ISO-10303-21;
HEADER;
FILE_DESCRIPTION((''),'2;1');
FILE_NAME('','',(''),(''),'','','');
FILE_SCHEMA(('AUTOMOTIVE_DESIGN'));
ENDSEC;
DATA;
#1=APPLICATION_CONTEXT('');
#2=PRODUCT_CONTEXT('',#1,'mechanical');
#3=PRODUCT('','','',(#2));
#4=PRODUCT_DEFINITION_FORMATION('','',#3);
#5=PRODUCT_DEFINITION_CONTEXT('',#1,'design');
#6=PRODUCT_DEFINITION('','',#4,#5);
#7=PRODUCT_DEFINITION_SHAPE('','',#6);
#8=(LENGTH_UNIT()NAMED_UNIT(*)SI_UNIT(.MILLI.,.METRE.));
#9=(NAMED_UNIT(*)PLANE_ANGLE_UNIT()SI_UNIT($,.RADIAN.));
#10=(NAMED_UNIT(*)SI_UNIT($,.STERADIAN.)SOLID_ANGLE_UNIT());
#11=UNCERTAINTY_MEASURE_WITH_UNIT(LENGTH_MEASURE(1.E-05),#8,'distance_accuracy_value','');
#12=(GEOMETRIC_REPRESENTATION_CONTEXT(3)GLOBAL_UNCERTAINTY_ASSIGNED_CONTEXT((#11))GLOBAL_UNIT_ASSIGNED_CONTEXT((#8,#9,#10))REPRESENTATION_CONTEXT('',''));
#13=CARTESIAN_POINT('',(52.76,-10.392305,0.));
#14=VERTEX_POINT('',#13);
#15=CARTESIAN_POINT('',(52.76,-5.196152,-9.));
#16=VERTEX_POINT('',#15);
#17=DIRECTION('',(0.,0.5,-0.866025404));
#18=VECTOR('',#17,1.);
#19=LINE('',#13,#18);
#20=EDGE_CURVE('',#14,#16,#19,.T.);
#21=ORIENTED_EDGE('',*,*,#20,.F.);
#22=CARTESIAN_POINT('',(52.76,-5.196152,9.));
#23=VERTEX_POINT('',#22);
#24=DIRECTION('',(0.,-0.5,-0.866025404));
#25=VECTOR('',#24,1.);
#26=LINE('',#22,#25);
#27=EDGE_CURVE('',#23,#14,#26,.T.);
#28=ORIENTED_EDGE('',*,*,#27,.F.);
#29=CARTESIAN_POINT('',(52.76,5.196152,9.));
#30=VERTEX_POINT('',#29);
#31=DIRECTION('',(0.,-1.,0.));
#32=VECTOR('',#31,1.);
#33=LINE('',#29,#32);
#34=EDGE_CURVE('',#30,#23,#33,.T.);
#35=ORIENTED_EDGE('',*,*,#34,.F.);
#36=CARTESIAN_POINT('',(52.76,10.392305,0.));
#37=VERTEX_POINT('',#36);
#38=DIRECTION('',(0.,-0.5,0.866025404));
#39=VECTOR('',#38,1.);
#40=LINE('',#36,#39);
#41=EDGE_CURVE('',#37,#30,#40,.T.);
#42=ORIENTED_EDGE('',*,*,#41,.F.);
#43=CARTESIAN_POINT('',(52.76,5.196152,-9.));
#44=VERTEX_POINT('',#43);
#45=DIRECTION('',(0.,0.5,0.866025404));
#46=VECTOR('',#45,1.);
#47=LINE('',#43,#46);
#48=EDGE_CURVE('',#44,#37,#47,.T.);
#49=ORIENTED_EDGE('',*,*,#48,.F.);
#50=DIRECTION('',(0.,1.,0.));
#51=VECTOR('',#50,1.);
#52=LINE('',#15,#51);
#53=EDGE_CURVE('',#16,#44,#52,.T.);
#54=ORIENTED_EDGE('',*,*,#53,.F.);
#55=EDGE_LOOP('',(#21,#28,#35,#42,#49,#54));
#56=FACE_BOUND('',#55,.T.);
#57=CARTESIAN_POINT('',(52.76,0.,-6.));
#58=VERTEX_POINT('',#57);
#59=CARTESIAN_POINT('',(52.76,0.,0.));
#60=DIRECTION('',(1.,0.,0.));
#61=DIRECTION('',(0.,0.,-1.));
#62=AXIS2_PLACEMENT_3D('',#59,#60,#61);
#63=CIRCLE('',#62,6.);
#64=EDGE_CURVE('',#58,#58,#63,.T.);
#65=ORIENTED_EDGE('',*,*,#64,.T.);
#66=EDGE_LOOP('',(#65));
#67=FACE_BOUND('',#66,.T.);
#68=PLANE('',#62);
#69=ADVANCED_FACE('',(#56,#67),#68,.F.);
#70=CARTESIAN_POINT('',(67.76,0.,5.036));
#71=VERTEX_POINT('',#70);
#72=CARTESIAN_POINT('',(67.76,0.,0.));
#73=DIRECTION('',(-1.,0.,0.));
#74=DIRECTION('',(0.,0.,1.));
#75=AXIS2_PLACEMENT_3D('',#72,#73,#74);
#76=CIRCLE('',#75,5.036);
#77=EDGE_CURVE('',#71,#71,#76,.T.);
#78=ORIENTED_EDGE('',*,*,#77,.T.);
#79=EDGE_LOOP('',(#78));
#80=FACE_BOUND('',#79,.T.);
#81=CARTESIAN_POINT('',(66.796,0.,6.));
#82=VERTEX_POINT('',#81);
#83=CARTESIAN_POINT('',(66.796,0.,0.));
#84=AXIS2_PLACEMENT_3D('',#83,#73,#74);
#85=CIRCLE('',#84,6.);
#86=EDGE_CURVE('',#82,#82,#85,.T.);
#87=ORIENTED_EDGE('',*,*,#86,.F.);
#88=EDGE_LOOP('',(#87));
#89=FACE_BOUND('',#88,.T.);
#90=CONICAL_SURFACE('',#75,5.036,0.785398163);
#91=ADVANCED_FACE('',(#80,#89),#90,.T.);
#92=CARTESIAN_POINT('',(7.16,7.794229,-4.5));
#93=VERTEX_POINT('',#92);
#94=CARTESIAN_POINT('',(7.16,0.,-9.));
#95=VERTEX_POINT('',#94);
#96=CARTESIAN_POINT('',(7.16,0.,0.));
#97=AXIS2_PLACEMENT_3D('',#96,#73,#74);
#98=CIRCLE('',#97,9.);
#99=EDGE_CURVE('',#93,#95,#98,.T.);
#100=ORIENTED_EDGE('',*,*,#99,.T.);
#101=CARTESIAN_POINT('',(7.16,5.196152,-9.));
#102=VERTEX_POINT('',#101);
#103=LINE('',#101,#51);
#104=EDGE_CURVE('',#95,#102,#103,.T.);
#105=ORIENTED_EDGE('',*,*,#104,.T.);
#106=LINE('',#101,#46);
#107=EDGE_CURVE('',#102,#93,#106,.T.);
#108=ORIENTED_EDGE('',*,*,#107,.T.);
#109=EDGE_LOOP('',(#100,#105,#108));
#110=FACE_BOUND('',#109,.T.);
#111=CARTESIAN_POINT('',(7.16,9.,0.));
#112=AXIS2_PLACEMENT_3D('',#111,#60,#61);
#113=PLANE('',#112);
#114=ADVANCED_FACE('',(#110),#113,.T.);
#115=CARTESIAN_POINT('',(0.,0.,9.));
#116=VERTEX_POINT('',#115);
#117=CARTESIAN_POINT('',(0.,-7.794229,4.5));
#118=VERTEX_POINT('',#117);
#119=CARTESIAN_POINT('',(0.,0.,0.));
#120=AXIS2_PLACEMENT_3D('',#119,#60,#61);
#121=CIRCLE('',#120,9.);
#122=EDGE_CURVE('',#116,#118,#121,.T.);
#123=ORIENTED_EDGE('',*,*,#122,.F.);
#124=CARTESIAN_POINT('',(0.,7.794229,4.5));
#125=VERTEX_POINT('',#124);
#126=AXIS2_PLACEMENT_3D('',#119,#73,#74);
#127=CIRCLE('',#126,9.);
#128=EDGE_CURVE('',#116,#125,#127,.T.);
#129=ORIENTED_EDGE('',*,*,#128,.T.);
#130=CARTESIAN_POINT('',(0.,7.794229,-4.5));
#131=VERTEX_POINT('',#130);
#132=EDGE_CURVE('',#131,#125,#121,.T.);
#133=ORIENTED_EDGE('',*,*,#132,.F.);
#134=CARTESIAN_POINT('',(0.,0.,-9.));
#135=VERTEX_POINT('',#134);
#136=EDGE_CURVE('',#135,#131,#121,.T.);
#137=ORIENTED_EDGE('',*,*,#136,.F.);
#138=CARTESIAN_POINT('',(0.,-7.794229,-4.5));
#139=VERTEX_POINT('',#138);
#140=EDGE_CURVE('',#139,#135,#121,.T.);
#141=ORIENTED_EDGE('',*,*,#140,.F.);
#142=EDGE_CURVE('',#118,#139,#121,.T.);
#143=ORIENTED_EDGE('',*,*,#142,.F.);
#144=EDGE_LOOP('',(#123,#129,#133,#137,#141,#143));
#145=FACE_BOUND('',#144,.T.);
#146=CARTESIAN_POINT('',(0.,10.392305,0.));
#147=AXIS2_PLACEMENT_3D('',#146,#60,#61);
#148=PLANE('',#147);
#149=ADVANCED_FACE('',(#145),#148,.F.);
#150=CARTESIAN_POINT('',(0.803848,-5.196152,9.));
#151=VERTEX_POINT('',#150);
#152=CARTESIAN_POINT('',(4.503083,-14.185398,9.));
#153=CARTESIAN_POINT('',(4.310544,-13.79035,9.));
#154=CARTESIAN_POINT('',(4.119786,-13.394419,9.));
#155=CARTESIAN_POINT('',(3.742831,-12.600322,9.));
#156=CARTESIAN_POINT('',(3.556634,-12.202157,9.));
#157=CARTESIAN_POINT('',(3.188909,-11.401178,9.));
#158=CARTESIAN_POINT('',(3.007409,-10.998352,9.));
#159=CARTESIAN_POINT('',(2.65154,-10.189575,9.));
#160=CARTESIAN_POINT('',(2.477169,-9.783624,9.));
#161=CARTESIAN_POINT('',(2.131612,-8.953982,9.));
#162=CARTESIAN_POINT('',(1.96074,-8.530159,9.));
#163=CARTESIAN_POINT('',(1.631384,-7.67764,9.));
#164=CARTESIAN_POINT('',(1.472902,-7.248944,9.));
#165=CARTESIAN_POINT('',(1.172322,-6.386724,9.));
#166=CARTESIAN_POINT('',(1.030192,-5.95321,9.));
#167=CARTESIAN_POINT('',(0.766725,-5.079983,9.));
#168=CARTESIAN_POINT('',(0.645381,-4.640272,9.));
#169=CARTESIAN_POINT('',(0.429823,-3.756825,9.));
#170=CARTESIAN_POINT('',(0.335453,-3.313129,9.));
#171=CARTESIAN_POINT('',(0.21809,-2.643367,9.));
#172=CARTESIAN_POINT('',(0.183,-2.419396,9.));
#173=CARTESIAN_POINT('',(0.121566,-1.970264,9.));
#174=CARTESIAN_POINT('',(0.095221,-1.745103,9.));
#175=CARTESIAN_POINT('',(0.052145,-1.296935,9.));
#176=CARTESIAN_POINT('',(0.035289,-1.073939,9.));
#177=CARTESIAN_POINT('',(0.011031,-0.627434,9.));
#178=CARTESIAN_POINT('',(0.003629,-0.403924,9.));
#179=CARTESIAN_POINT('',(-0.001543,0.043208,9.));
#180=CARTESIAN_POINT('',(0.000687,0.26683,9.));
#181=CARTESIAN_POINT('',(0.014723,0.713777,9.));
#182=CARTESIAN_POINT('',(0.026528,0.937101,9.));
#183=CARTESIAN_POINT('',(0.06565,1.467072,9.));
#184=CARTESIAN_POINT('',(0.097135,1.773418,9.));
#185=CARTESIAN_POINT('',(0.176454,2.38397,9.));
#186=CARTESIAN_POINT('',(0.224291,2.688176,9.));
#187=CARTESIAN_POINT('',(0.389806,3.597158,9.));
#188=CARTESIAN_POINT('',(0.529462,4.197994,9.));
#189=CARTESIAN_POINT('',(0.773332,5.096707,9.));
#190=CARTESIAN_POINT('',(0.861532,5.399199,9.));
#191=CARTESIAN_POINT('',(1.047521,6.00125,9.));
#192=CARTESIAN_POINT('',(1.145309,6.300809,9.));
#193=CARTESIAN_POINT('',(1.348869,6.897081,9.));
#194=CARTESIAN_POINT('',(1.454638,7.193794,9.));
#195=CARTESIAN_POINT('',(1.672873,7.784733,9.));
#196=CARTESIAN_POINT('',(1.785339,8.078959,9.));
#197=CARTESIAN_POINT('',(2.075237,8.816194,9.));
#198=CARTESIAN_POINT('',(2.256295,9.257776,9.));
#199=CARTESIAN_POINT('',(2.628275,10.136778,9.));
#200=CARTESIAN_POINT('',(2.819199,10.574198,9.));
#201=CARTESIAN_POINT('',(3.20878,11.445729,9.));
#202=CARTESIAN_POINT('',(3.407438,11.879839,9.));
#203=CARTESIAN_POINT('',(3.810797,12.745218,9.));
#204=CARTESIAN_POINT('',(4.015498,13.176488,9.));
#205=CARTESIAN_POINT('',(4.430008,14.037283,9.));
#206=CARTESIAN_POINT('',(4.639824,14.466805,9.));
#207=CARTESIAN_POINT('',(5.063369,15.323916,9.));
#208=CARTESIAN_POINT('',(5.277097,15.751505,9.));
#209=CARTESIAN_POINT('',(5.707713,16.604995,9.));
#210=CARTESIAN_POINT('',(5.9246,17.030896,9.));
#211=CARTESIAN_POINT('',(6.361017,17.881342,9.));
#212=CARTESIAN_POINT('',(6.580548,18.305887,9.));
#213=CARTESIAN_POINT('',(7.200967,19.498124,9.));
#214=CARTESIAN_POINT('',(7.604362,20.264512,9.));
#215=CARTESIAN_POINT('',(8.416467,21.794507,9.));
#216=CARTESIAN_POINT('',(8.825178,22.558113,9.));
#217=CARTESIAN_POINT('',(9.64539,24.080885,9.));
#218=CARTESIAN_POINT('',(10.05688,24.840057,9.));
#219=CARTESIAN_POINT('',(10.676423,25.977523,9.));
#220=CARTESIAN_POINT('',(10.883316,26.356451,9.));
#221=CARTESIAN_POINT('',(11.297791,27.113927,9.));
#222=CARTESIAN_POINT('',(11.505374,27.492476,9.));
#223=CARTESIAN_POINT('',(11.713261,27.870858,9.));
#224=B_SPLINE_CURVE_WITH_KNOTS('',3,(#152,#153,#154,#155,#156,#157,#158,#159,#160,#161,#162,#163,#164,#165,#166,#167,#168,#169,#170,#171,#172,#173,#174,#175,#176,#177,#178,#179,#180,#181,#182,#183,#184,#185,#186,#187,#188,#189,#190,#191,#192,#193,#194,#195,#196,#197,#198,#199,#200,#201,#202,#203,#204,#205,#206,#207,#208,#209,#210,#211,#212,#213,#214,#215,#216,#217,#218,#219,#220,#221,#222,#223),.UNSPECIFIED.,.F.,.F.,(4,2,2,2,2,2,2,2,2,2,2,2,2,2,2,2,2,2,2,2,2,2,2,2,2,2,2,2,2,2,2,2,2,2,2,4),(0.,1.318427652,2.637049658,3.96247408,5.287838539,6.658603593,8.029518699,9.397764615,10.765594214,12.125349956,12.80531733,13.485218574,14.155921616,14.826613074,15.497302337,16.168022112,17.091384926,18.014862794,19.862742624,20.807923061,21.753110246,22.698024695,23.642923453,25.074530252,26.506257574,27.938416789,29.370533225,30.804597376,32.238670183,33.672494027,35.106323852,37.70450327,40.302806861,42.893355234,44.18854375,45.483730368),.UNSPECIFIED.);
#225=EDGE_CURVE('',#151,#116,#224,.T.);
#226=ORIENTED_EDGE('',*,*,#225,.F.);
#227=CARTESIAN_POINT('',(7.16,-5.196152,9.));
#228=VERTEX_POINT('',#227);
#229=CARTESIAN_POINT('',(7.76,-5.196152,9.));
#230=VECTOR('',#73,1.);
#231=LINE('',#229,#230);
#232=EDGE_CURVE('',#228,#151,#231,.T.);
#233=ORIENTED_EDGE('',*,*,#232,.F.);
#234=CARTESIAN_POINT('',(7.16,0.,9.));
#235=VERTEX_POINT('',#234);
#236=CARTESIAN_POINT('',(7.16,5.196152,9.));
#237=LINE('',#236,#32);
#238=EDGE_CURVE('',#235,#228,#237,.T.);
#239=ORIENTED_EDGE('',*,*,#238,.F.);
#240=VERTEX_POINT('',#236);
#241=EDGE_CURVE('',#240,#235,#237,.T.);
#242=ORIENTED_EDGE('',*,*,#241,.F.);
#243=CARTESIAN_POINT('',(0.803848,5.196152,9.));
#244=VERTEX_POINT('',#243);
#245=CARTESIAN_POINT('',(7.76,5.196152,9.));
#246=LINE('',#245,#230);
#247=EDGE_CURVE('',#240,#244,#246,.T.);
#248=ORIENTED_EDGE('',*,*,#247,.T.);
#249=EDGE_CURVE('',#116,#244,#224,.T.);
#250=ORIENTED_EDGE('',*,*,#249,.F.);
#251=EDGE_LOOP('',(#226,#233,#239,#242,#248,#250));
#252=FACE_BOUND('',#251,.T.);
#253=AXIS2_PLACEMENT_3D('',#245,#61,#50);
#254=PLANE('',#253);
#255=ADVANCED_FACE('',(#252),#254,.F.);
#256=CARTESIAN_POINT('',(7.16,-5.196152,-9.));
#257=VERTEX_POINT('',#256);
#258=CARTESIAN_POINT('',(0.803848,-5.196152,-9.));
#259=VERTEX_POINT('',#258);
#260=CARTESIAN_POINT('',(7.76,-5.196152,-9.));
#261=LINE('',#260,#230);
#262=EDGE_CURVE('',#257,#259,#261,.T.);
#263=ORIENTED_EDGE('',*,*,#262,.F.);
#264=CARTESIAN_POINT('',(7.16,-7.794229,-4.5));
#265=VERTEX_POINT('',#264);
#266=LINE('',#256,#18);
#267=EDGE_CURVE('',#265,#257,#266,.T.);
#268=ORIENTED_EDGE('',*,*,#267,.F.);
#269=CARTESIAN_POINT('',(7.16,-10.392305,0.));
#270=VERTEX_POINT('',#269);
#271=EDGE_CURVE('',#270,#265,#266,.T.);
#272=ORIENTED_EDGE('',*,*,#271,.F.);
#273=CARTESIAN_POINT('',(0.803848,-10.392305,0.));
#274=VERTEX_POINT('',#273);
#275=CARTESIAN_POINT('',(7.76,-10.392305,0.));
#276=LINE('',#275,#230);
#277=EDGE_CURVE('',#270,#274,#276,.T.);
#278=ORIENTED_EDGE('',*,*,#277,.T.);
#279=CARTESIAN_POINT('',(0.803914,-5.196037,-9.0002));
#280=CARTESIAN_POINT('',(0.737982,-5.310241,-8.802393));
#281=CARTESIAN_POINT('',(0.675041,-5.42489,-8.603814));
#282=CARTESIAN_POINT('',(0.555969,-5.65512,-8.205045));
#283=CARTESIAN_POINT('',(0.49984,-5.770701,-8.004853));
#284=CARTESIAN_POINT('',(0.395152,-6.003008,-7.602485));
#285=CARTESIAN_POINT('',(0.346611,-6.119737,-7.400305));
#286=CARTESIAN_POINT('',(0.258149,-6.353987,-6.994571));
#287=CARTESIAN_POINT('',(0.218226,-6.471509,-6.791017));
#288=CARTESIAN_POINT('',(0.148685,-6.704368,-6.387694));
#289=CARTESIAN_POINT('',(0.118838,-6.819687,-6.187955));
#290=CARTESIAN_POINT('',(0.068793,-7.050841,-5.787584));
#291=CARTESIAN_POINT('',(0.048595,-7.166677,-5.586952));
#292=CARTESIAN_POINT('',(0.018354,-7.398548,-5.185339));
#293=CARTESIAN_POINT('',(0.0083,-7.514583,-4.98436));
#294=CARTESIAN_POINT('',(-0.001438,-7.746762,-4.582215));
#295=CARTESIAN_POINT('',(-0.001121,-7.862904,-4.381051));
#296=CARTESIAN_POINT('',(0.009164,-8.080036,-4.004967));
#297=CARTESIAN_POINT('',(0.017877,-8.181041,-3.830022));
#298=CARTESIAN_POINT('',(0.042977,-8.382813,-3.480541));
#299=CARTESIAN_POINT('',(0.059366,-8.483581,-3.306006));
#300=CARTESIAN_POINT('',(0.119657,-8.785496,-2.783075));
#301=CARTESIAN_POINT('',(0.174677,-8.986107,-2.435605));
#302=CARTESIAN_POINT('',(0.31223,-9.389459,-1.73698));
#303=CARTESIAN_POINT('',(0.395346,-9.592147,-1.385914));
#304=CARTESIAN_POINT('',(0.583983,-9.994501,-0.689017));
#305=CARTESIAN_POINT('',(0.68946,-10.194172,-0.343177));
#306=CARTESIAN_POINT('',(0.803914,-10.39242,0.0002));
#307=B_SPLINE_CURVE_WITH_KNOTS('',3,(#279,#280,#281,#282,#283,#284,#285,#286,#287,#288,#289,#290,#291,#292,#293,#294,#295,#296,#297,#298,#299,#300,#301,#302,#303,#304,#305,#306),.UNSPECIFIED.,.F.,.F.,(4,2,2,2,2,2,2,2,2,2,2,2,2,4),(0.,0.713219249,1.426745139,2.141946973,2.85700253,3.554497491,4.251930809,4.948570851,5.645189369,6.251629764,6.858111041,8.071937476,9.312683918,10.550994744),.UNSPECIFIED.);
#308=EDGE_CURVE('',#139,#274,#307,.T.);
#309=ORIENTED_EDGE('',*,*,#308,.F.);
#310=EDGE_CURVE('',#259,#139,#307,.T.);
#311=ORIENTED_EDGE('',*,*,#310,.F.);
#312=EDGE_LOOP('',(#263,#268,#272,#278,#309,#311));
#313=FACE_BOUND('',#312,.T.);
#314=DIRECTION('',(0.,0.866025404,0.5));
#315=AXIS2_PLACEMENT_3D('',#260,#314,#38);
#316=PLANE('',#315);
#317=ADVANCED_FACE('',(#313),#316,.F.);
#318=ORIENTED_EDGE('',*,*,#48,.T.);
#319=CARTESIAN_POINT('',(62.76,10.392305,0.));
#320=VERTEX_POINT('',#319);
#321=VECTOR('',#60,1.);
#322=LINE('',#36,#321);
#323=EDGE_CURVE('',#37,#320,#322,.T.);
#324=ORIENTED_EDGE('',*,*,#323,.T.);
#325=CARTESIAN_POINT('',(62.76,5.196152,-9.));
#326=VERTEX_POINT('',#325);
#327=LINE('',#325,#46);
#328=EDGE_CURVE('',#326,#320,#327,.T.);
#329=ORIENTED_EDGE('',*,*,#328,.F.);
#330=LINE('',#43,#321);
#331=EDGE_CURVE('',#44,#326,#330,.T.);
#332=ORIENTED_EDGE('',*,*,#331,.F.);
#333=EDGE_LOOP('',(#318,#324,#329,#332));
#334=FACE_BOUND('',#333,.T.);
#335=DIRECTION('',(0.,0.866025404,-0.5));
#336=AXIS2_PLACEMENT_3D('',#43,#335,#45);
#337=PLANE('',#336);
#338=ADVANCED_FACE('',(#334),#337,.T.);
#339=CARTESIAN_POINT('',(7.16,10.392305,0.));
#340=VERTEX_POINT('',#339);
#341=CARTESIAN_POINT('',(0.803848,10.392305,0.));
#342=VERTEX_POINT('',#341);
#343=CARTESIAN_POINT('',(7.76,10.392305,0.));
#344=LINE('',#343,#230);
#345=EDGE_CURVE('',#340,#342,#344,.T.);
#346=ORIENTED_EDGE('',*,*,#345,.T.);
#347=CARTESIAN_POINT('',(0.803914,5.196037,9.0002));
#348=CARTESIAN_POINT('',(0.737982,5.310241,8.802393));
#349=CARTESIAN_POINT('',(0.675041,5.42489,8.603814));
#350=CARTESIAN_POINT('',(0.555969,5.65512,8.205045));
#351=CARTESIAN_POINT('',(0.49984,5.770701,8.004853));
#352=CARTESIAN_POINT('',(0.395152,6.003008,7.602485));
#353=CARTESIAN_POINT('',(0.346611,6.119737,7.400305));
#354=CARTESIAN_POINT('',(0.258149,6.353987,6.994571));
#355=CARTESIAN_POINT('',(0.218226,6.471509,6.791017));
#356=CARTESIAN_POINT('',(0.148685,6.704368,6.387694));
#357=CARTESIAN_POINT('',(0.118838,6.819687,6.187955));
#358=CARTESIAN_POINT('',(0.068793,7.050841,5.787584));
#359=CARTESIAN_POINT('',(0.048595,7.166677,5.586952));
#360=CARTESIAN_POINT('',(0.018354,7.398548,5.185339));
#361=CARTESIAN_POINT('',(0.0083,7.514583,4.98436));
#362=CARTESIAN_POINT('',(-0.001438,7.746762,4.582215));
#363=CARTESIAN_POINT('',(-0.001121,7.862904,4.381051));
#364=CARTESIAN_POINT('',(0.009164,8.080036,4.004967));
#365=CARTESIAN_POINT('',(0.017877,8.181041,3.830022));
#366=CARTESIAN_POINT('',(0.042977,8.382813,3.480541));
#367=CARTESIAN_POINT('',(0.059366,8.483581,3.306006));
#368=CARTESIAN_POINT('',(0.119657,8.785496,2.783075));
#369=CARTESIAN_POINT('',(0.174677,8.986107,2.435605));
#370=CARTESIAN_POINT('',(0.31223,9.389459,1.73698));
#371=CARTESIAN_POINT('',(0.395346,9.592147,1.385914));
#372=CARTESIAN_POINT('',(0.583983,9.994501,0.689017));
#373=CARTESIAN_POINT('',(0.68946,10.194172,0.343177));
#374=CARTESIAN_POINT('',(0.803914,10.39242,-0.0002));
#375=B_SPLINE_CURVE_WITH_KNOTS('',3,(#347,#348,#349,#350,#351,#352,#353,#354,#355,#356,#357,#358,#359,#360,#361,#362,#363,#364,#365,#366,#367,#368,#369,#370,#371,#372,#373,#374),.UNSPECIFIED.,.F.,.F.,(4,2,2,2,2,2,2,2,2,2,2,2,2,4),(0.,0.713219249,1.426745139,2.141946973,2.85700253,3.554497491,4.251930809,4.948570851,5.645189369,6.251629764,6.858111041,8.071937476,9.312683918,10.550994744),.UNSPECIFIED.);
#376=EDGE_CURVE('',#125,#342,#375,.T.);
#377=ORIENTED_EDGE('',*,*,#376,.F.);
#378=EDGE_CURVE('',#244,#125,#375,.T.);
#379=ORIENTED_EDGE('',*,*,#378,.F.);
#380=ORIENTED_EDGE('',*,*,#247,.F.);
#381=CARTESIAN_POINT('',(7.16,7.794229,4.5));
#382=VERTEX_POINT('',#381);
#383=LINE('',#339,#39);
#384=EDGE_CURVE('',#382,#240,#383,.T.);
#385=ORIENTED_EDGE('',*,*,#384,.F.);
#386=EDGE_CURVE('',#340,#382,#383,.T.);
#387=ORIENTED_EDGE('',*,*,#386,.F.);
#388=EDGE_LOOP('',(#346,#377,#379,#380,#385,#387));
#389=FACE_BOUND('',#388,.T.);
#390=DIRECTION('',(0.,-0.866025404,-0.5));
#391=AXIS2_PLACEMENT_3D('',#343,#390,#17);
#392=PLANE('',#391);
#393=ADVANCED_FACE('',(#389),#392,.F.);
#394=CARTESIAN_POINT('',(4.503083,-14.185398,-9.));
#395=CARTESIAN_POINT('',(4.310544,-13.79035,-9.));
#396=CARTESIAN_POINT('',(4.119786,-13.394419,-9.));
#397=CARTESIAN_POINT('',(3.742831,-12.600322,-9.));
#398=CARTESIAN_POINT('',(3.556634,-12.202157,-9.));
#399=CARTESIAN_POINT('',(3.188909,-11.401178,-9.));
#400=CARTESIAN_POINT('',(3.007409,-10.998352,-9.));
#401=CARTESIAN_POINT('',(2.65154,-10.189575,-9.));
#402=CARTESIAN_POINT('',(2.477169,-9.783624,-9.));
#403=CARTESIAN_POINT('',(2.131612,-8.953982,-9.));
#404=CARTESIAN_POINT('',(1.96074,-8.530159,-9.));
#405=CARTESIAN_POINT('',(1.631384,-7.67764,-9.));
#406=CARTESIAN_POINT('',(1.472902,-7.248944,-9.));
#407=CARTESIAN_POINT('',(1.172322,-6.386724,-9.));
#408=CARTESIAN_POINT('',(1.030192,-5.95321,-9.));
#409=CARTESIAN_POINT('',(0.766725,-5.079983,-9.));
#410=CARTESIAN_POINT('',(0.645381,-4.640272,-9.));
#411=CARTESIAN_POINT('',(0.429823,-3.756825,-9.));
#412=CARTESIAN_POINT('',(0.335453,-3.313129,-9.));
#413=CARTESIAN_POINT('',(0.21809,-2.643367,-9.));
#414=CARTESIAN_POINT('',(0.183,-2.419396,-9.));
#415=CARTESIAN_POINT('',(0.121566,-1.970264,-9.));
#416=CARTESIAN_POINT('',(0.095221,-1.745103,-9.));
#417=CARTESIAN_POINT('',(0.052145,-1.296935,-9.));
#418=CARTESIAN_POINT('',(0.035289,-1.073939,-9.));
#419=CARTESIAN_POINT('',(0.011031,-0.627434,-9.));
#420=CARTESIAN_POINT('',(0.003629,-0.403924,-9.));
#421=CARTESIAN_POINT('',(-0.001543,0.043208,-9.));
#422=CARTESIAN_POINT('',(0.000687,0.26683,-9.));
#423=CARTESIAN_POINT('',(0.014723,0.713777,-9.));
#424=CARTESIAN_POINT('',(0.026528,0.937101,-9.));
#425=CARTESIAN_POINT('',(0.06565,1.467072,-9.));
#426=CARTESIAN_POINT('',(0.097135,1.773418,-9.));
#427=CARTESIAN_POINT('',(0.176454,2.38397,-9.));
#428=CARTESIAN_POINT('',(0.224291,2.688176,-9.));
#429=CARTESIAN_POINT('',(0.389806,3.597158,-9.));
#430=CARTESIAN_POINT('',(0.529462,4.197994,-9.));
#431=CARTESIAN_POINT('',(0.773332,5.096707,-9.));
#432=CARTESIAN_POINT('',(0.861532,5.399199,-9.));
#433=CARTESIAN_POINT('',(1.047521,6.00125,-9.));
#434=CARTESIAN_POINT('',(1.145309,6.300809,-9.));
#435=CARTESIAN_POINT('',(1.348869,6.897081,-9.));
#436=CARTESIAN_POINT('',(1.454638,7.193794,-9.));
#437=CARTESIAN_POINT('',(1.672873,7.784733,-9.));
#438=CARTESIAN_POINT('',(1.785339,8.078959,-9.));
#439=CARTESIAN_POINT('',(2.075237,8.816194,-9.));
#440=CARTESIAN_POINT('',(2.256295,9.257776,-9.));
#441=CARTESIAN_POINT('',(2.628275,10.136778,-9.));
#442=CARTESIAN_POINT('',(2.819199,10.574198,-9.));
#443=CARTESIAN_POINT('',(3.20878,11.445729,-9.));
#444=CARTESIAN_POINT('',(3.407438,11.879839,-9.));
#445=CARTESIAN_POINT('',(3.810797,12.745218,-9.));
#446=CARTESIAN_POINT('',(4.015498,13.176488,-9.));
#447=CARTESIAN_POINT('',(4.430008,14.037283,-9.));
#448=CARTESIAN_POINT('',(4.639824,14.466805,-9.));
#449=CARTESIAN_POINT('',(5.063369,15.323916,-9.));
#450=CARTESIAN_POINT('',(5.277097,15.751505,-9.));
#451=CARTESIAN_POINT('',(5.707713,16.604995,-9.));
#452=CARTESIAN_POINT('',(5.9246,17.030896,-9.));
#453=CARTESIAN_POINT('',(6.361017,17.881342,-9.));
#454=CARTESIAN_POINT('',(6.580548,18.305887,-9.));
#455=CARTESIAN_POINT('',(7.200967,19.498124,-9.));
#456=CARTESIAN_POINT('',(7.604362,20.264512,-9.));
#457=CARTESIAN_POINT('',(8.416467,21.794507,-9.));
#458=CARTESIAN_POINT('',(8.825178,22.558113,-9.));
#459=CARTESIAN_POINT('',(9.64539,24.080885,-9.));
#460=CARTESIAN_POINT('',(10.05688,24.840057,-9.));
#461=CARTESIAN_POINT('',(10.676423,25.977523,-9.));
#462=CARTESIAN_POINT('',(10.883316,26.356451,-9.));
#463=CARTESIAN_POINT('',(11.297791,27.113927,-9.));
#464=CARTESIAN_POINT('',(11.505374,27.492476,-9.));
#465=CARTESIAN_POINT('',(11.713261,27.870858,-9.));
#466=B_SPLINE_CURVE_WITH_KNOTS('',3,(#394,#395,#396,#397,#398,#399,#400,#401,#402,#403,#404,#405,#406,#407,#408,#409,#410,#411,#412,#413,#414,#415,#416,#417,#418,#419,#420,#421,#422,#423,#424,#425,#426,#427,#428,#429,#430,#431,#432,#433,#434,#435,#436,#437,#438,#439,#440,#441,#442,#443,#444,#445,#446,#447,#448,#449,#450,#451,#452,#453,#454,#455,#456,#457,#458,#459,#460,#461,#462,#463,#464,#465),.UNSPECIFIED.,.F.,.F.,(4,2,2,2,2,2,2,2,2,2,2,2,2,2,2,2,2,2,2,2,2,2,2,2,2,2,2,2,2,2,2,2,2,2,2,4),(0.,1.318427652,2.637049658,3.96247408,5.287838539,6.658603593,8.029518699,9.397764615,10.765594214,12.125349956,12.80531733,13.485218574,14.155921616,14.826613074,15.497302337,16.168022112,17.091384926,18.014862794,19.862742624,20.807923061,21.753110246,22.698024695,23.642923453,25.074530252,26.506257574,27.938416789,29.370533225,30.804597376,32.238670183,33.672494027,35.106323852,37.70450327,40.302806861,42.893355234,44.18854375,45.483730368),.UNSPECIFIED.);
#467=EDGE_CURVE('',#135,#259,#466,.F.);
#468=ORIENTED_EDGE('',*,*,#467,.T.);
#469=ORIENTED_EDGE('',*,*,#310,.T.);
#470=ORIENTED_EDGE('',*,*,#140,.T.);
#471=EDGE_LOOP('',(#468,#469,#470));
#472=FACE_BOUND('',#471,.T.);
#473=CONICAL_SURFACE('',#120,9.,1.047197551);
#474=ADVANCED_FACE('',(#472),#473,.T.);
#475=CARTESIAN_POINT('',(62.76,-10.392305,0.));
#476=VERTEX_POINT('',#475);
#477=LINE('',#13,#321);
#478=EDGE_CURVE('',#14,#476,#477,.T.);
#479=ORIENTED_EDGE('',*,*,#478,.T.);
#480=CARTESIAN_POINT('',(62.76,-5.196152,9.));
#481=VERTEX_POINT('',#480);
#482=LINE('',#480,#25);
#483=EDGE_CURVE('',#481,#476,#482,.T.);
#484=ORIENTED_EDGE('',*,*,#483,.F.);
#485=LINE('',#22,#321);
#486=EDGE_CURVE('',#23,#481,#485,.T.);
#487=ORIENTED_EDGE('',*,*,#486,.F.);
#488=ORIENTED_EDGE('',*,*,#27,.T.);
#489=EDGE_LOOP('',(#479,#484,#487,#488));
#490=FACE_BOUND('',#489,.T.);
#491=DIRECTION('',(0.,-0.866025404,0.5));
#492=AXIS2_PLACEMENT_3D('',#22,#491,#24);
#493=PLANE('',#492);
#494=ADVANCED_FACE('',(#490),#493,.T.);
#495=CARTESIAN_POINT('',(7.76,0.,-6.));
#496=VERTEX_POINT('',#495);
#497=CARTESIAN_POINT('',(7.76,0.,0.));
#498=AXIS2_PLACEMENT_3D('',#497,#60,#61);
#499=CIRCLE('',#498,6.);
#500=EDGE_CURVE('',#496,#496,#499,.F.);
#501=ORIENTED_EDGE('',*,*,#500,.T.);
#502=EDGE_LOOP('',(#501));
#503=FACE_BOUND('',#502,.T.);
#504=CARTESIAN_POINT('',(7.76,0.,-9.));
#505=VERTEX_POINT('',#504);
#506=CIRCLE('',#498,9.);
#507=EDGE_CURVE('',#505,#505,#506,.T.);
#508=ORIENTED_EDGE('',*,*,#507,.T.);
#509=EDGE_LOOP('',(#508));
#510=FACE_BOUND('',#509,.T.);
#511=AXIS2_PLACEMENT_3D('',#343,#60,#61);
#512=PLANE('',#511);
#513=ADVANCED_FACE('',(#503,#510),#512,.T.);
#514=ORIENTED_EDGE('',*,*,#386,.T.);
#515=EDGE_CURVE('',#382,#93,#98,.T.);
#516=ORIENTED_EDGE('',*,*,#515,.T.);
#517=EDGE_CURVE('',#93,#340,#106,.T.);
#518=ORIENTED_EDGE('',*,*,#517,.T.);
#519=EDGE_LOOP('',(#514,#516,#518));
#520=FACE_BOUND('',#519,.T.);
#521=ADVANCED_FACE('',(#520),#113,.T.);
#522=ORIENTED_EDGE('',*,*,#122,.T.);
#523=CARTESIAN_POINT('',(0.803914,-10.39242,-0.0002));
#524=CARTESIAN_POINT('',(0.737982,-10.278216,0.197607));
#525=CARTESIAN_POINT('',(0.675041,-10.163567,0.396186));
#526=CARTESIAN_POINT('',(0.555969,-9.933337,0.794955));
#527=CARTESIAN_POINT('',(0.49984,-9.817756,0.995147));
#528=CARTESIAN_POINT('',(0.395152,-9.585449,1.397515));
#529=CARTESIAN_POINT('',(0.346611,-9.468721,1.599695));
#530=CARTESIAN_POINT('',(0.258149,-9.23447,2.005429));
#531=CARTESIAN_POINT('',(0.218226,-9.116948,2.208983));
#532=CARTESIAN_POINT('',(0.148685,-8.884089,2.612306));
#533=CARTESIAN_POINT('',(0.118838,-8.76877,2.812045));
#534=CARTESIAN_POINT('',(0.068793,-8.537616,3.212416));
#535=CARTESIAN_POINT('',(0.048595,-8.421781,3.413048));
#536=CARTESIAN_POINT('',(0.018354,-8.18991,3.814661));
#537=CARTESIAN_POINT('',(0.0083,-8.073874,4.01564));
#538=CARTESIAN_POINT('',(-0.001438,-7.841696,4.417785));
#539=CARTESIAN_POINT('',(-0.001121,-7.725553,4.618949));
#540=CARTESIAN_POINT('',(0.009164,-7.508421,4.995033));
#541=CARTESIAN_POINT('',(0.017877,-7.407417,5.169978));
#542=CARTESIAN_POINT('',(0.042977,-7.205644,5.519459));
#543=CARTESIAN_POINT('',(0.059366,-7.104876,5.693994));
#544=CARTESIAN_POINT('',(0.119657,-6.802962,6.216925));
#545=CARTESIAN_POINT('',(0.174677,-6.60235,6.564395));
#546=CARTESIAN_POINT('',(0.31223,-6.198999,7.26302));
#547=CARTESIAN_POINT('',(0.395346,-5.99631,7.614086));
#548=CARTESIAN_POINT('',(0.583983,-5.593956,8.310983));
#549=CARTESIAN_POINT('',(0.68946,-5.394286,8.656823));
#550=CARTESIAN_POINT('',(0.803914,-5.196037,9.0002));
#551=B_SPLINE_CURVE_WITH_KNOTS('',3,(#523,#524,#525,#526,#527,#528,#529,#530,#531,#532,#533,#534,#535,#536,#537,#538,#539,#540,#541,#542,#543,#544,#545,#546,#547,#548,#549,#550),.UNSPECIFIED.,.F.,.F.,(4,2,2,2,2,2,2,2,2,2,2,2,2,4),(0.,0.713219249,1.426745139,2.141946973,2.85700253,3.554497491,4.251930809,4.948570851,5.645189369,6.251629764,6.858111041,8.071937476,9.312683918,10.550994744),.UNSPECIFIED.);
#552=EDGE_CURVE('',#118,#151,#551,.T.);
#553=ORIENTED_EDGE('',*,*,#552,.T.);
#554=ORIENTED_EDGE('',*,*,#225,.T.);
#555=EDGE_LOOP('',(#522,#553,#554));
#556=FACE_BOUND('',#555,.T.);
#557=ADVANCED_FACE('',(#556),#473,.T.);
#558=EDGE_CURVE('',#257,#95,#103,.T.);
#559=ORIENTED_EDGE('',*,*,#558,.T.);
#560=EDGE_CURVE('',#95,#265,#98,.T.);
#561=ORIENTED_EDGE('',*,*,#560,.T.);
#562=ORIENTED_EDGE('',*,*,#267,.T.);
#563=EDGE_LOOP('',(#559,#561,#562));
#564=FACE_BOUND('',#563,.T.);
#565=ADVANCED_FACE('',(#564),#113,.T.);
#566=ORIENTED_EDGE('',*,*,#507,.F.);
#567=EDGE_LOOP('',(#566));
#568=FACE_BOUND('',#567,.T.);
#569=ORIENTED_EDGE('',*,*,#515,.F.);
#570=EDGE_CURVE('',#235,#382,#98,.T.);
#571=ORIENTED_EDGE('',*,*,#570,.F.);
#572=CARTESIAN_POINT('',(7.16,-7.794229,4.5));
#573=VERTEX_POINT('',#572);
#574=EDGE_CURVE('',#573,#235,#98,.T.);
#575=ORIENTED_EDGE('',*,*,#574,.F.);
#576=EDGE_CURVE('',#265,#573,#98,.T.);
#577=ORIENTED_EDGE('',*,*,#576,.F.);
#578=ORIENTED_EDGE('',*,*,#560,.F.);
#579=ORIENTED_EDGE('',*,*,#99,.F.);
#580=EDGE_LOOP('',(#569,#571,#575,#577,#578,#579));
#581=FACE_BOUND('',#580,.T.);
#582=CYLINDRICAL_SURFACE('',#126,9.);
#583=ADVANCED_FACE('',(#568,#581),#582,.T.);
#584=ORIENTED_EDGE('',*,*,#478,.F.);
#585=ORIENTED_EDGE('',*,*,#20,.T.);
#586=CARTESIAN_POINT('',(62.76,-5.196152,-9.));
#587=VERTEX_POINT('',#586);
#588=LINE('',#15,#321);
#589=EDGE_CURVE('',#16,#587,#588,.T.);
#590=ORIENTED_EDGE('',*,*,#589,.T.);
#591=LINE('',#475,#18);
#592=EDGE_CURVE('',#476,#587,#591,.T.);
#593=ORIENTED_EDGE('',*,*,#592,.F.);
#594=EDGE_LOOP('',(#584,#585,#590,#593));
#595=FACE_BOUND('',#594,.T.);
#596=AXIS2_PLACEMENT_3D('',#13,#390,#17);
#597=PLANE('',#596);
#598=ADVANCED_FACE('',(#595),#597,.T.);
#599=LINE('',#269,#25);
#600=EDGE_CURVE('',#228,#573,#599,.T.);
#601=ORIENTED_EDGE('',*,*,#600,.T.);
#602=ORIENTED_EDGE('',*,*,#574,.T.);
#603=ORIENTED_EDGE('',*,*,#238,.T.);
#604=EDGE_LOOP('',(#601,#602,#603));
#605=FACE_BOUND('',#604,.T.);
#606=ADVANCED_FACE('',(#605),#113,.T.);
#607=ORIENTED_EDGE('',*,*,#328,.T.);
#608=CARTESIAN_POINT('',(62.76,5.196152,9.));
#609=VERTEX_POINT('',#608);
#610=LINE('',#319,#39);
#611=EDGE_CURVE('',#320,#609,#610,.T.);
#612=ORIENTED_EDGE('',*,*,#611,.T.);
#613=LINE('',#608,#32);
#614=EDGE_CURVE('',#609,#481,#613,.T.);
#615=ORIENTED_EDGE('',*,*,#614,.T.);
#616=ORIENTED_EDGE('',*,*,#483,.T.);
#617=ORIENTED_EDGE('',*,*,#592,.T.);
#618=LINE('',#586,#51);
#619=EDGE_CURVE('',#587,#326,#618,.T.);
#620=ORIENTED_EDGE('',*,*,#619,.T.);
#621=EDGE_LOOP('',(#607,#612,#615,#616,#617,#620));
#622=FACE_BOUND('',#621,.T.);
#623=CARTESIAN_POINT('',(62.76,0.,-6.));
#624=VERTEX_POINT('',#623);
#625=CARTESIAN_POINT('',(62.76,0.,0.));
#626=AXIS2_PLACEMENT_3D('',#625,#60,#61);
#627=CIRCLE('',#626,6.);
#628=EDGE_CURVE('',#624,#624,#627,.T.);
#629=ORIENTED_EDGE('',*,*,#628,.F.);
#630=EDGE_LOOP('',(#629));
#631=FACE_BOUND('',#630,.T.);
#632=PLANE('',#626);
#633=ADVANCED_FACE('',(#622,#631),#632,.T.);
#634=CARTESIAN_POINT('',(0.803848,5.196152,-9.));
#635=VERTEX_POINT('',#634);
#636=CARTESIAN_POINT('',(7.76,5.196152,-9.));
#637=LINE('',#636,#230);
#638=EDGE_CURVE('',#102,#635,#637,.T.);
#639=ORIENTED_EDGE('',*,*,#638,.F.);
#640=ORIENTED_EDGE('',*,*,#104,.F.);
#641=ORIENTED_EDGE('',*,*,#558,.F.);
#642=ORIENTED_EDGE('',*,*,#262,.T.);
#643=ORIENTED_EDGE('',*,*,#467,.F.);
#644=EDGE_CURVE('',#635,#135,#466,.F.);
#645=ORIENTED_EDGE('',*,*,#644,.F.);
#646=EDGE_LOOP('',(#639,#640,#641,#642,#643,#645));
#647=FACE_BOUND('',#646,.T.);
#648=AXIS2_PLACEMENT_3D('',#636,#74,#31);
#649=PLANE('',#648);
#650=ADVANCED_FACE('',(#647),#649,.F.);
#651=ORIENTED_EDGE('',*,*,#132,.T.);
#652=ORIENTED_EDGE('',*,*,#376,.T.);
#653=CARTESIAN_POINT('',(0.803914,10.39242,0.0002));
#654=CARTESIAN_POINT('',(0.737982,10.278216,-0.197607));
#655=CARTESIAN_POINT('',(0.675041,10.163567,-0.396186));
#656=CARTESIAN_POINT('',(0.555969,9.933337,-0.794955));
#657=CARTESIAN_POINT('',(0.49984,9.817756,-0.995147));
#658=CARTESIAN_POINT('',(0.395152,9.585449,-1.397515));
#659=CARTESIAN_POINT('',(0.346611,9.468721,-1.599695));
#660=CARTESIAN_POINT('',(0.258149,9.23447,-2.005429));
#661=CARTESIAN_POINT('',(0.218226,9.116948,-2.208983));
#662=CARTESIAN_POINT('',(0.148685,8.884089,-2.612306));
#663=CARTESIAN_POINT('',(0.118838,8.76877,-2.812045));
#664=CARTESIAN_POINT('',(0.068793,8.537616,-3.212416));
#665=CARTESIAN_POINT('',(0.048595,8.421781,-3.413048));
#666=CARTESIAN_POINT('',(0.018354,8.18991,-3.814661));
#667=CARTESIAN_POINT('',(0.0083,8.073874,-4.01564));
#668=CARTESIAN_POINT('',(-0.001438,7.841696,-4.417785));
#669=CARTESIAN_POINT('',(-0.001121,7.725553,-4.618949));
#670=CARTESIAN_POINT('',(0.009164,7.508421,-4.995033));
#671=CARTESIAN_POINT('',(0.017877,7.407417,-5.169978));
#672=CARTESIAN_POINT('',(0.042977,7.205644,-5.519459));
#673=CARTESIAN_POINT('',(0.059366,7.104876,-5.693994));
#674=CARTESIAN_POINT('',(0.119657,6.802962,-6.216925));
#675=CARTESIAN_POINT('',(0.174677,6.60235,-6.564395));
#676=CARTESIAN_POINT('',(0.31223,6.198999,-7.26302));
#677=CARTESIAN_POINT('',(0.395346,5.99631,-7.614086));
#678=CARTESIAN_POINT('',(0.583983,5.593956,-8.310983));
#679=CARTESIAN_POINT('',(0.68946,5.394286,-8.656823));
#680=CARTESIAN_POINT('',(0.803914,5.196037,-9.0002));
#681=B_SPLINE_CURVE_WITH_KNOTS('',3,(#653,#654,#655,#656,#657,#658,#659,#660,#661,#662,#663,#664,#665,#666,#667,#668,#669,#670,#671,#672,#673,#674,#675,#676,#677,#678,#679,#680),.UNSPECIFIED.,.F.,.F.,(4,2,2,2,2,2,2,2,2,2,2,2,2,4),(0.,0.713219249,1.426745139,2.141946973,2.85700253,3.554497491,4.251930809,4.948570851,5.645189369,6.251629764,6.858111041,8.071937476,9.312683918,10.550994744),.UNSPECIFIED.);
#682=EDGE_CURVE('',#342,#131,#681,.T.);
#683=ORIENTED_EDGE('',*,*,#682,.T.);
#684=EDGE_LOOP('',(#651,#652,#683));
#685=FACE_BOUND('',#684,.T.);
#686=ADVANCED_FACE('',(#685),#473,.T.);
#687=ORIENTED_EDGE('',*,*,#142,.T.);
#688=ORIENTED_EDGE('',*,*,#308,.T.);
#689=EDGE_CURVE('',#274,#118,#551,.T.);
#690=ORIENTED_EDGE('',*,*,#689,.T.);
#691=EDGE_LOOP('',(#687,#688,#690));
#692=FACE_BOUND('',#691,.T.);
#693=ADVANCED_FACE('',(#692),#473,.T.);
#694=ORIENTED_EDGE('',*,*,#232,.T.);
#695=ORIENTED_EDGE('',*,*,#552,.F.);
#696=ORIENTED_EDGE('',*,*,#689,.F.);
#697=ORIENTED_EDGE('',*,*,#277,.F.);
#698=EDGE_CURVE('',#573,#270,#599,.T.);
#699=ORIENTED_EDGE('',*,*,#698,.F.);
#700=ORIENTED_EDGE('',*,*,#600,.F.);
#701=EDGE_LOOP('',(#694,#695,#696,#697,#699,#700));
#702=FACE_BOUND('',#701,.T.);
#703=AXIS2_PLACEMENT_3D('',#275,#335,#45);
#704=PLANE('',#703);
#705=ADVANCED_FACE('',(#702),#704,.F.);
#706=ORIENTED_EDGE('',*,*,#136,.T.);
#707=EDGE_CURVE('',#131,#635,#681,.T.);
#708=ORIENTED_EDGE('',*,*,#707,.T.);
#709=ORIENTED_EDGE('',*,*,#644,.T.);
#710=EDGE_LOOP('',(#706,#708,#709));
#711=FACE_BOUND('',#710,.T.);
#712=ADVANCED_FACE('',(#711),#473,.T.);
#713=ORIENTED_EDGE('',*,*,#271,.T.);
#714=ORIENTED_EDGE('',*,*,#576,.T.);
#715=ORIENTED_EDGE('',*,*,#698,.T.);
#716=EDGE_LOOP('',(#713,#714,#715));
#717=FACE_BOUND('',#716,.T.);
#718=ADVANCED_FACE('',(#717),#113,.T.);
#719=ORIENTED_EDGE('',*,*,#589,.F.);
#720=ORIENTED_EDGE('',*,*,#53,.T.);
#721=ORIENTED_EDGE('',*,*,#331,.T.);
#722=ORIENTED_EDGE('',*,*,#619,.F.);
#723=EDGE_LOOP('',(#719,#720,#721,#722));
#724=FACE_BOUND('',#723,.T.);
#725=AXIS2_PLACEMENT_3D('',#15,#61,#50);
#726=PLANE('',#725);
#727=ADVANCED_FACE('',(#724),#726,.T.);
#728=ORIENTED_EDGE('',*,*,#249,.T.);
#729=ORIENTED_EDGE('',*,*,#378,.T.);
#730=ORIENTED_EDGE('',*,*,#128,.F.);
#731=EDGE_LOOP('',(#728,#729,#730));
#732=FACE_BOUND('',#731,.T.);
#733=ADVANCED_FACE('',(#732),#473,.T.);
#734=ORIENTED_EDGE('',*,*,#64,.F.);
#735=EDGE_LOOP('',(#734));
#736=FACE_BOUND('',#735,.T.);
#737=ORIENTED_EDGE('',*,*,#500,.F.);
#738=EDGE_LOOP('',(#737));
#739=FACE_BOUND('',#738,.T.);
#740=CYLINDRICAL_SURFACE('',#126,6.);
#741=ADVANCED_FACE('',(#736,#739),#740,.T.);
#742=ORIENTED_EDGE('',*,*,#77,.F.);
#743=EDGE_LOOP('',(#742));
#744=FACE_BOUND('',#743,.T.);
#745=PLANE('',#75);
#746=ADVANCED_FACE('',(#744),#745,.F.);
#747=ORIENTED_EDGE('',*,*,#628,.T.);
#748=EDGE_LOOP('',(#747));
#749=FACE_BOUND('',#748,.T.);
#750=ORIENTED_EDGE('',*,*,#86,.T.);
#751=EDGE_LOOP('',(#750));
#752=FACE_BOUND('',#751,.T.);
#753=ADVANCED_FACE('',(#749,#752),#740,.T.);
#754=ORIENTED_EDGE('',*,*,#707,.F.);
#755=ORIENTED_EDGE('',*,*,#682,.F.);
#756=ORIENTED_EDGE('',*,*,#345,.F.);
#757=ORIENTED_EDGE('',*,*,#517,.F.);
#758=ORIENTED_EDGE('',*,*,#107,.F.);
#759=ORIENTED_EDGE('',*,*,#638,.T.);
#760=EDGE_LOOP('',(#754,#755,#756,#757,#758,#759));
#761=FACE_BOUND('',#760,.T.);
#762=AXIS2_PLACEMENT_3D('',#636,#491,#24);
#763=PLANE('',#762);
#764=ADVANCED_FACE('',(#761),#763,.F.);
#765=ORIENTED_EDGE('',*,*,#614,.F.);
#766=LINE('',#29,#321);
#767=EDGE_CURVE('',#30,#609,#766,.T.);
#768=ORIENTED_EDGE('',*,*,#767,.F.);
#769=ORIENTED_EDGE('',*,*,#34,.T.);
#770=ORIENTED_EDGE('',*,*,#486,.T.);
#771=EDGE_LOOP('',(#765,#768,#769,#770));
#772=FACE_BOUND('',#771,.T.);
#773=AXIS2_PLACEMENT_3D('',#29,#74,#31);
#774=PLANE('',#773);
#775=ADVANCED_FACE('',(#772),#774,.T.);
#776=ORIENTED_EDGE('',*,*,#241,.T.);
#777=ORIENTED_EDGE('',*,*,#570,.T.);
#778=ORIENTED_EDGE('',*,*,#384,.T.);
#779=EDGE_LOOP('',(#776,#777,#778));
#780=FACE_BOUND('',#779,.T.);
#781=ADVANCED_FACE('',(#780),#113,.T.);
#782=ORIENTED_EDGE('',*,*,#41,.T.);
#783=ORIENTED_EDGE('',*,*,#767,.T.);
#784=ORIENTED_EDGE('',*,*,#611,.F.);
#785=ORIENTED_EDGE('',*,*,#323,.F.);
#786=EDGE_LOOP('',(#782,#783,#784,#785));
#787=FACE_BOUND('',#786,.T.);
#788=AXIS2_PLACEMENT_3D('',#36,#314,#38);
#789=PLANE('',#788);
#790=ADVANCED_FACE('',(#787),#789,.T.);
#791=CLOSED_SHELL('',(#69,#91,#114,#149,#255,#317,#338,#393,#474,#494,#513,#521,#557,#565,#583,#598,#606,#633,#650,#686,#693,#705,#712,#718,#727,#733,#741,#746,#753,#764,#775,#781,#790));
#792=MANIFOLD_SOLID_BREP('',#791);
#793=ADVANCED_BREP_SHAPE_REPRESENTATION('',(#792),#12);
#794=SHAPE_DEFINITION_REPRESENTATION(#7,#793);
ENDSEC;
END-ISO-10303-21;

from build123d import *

# Parameters (mm, degrees)
BASEHEAD_DEPTH      = 7.76
SKETCH4_W           = 0.6
SKETCH4_H           = 11.392304845
BOSS_EXTRUDE1_DEPTH = 10


# Read off the part's stored shape, not the designer's step: HeadChamfer
with BuildPart() as part:
    # Sketch1 → BaseHead (new body)
    with BuildSketch(Plane(origin=(0, 0, 0), x_dir=(0, 0, -1), z_dir=(1, 0, 0))):
        Polygon((9, 5.196152423), (9, -5.196152423), (0, -10.392304845), (-9, -5.196152423), (-9, 5.196152423), (0, 10.392304845), align=None)
    extrude(amount=BASEHEAD_DEPTH)

    # HeadChamfer outline → HeadChamfer (revolve, cut)
    with BuildSketch(Plane.YX):
        Polygon((10.392304847, 0.803847578), (9, 0), (10.392304847, 0), align=None)
    revolve(axis=Axis((0, 0, 0), (1, 0, 0)), mode=Mode.SUBTRACT)

    # HeadChamfer 2 outline → HeadChamfer 2 (revolve)
    with BuildSketch(Plane.YX):
        Polygon((6, 7.76), (6, 66.796), (5.036, 67.76), (0, 67.76), (0, 7.76), align=None)
    revolve(axis=Axis((0, 0, 0), (1, 0, 0)))

    # Sketch4 → BearingFace (revolve, cut)
    with BuildSketch(Plane.XY, mode=Mode.PRIVATE) as bearingface_sk:
        with Locations((7.46, 14.696152423)):
            Rectangle(SKETCH4_W, SKETCH4_H)
    revolve(bearingface_sk.sketch.rotate(Axis((0, 0, 0), (1, 0, 0)), 90), axis=Axis((0, 0, 0), (1, 0, 0)), mode=Mode.SUBTRACT)

    # Sketch5 → Boss-Extrude1 (add)
    with BuildSketch(Plane(origin=(62.76, 0, 0), x_dir=(0, 0, -1), z_dir=(1, 0, 0))):
        Polygon((0, 10.392304845), (-9, 5.196152423), (-9, -5.196152423), (0, -10.392304845), (9, -5.196152423), (9, 5.196152423), align=None)
    extrude(amount=-BOSS_EXTRUDE1_DEPTH)


solid = part.part
